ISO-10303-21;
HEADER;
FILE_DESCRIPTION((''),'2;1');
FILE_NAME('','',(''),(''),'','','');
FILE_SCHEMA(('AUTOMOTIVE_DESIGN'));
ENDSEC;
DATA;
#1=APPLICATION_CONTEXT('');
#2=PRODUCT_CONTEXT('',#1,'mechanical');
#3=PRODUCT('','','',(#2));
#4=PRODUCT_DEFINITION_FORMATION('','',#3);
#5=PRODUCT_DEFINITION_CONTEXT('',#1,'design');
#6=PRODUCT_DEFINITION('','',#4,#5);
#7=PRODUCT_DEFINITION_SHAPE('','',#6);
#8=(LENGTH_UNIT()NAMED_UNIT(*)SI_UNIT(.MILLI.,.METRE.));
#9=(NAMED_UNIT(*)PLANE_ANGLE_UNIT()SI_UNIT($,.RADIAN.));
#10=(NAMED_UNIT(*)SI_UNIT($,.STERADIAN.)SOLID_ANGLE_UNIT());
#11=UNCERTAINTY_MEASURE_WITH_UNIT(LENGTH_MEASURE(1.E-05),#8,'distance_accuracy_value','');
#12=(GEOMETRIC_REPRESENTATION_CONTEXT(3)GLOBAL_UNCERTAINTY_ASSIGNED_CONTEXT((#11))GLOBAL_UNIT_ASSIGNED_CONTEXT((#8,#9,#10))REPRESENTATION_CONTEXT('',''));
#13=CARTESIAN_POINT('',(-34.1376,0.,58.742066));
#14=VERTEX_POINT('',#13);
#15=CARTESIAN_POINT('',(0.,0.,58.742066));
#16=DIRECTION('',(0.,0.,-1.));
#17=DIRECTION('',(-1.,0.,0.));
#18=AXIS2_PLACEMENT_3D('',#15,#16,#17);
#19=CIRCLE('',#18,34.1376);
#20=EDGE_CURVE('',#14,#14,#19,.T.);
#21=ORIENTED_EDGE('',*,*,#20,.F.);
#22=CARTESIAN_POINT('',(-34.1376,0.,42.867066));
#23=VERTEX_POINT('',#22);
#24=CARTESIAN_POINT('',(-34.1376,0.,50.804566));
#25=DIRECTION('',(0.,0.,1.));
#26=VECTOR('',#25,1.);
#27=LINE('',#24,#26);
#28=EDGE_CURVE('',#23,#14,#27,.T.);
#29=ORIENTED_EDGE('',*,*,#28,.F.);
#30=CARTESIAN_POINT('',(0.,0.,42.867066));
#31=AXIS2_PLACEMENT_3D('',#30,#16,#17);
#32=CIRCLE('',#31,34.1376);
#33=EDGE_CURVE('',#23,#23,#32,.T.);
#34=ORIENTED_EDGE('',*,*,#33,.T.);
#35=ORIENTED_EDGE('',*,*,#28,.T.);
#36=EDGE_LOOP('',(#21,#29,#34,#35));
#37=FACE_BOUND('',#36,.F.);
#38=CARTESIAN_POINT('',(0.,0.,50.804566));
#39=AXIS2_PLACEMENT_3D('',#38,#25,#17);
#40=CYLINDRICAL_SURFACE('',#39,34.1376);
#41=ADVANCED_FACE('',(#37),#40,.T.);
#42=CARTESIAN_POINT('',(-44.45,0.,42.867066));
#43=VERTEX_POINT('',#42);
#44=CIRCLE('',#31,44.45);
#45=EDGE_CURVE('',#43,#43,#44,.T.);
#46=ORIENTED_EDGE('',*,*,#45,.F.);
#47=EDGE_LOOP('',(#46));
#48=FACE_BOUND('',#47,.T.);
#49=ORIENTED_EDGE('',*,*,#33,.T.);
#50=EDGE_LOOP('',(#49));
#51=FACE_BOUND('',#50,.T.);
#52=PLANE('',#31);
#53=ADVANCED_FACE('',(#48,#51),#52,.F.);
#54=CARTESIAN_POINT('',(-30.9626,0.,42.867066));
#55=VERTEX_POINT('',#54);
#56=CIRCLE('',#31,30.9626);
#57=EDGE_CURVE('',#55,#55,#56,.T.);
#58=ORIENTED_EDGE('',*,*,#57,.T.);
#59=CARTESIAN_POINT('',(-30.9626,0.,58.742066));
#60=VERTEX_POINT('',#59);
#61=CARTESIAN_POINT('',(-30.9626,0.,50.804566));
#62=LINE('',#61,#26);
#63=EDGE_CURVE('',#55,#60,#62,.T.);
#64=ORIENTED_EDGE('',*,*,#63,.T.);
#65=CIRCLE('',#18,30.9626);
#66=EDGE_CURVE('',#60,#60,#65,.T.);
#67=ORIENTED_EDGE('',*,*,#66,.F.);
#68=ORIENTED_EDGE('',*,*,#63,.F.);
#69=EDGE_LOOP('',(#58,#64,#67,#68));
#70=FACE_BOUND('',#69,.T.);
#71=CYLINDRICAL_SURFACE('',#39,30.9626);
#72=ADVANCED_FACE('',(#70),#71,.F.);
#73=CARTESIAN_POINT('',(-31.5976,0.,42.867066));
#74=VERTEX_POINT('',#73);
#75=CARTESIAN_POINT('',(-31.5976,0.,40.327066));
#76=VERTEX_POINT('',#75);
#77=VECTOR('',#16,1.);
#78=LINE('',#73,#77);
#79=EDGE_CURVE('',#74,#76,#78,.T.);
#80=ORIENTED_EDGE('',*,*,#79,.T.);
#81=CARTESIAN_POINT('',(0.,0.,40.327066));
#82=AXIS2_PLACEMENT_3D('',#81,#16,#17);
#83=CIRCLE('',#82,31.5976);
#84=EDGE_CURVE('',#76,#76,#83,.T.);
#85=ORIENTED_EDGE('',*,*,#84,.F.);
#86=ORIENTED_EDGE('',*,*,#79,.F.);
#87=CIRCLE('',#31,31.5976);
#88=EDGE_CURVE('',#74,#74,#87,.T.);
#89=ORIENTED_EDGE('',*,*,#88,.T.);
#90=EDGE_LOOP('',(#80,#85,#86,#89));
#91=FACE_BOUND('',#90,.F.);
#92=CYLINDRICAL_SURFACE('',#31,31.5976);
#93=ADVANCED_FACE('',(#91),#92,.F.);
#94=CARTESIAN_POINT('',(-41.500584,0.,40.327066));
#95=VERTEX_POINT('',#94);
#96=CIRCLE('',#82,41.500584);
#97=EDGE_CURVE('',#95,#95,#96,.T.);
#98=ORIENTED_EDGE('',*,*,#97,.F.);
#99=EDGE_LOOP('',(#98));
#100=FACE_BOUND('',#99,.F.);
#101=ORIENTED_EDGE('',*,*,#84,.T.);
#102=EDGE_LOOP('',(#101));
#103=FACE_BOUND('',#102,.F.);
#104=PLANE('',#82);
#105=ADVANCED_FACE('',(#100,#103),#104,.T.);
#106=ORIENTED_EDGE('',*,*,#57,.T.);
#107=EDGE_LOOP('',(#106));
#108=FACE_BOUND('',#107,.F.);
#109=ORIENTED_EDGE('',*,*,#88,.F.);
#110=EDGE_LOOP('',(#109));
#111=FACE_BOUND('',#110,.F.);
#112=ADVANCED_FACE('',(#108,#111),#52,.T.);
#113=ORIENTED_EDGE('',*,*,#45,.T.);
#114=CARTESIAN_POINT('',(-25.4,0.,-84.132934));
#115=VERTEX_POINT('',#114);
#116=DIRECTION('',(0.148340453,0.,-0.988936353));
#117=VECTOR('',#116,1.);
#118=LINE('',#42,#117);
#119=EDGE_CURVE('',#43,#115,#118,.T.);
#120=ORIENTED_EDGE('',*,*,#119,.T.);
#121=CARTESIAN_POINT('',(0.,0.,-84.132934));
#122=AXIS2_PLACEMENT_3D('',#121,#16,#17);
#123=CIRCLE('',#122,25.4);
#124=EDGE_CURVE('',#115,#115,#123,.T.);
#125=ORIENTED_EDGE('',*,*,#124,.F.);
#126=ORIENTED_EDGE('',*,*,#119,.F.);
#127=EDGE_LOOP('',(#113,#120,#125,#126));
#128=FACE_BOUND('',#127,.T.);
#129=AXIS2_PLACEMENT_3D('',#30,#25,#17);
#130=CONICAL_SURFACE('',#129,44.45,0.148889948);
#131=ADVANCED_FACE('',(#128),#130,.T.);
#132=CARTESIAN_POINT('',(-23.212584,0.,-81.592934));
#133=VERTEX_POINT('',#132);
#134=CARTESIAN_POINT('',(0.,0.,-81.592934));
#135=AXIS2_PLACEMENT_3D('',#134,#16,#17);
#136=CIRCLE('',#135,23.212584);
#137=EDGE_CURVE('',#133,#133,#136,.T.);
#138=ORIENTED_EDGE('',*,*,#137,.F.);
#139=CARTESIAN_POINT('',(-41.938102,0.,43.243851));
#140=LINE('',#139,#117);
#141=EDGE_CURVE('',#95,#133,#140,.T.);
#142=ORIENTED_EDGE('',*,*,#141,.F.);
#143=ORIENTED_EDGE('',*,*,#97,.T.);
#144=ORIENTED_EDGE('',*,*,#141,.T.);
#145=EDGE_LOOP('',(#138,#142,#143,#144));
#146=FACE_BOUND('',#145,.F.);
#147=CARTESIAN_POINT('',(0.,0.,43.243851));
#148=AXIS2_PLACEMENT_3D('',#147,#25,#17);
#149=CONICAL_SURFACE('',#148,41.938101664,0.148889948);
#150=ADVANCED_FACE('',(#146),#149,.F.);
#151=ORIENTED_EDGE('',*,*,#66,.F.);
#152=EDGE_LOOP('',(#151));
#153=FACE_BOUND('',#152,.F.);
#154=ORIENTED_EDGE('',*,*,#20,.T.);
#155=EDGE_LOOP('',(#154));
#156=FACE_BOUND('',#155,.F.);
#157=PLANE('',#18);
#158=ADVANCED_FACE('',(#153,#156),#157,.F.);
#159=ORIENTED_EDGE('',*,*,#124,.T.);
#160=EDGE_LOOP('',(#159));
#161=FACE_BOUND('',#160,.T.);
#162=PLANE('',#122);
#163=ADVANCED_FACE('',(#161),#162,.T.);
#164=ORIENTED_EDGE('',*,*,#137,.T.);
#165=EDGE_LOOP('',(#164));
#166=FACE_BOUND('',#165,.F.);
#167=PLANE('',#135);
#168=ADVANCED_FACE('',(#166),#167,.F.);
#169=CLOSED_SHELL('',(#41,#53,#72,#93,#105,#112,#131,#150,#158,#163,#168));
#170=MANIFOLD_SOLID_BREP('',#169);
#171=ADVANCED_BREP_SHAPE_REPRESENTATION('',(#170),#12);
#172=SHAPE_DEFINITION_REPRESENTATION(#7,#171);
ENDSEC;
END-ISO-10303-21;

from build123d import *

# Parameters (mm, degrees)
F0_W = 3.175
F0_H = 15.875
F2_T = 2.54


# Not quite as in the source:
# - a shell that OpenCascade refuses in one call is made with other operations: the cavity is built on its own and cut out


with BuildPart() as f1:
    # F0 (on Front) → F1 (revolve)
    with BuildSketch(Plane.XZ):
        Polygon((0, -84.1329338265), (0, 42.8670661735), (-30.9626, 42.8670661735), (-34.1376, 42.8670661735), (-44.45, 42.8670661735), (-25.4, -84.1329338265), align=None)
        with Locations((-32.5501, 50.8045661735)):
            Rectangle(F0_W, F0_H)
    revolve(axis=Axis((0, 0, -17.2506261634), (0, 0, -1)))

    # F2: shell of thickness 2.54, made by hand


with BuildPart() as f2_core1:
    # F2_t2: copy of F1
    add(f1.part)

    # the walls: a layer under each face that stays
    f2_faces = [f2_core1.faces().sort_by_distance(p)[0] for p in [
        (30.9626, 0, 50.8045661735),
        (-22.7584, -22.7584, 58.7420661735),
        (34.1376, 0, 50.8045661735),
        (-29.6333333333, -29.6333333333, 42.8670661735),
        (34.925, 0, -20.6329338265),
        (0, 0, -84.1329338265),
    ]]
    thicken(f2_faces, amount=-F2_T, mode=Mode.SUBTRACT)

    # F2_s3 → F2_t4 (revolve, cut)
    with BuildSketch(Plane.XZ):
        Polygon((-34.163, 42.8924661735), (-31.5976, 42.8670661735), (-31.5976, 40.3270661735), (-34.1376, 40.3270661735), align=None)
    revolve(axis=Axis((0, 0, 42.8670661735), (0, 0, -1)), mode=Mode.SUBTRACT)


with BuildPart() as f1_1:
    add(f1.part)

    # what is left inside the walls is the cavity
    f2_cavity = [f2_core1.part.solids().sort_by_distance(p)[0] for p in [
        (35.379465, 0, -0.309166),
    ]]
    add(f2_cavity, mode=Mode.SUBTRACT)


solid = f1_1.part
